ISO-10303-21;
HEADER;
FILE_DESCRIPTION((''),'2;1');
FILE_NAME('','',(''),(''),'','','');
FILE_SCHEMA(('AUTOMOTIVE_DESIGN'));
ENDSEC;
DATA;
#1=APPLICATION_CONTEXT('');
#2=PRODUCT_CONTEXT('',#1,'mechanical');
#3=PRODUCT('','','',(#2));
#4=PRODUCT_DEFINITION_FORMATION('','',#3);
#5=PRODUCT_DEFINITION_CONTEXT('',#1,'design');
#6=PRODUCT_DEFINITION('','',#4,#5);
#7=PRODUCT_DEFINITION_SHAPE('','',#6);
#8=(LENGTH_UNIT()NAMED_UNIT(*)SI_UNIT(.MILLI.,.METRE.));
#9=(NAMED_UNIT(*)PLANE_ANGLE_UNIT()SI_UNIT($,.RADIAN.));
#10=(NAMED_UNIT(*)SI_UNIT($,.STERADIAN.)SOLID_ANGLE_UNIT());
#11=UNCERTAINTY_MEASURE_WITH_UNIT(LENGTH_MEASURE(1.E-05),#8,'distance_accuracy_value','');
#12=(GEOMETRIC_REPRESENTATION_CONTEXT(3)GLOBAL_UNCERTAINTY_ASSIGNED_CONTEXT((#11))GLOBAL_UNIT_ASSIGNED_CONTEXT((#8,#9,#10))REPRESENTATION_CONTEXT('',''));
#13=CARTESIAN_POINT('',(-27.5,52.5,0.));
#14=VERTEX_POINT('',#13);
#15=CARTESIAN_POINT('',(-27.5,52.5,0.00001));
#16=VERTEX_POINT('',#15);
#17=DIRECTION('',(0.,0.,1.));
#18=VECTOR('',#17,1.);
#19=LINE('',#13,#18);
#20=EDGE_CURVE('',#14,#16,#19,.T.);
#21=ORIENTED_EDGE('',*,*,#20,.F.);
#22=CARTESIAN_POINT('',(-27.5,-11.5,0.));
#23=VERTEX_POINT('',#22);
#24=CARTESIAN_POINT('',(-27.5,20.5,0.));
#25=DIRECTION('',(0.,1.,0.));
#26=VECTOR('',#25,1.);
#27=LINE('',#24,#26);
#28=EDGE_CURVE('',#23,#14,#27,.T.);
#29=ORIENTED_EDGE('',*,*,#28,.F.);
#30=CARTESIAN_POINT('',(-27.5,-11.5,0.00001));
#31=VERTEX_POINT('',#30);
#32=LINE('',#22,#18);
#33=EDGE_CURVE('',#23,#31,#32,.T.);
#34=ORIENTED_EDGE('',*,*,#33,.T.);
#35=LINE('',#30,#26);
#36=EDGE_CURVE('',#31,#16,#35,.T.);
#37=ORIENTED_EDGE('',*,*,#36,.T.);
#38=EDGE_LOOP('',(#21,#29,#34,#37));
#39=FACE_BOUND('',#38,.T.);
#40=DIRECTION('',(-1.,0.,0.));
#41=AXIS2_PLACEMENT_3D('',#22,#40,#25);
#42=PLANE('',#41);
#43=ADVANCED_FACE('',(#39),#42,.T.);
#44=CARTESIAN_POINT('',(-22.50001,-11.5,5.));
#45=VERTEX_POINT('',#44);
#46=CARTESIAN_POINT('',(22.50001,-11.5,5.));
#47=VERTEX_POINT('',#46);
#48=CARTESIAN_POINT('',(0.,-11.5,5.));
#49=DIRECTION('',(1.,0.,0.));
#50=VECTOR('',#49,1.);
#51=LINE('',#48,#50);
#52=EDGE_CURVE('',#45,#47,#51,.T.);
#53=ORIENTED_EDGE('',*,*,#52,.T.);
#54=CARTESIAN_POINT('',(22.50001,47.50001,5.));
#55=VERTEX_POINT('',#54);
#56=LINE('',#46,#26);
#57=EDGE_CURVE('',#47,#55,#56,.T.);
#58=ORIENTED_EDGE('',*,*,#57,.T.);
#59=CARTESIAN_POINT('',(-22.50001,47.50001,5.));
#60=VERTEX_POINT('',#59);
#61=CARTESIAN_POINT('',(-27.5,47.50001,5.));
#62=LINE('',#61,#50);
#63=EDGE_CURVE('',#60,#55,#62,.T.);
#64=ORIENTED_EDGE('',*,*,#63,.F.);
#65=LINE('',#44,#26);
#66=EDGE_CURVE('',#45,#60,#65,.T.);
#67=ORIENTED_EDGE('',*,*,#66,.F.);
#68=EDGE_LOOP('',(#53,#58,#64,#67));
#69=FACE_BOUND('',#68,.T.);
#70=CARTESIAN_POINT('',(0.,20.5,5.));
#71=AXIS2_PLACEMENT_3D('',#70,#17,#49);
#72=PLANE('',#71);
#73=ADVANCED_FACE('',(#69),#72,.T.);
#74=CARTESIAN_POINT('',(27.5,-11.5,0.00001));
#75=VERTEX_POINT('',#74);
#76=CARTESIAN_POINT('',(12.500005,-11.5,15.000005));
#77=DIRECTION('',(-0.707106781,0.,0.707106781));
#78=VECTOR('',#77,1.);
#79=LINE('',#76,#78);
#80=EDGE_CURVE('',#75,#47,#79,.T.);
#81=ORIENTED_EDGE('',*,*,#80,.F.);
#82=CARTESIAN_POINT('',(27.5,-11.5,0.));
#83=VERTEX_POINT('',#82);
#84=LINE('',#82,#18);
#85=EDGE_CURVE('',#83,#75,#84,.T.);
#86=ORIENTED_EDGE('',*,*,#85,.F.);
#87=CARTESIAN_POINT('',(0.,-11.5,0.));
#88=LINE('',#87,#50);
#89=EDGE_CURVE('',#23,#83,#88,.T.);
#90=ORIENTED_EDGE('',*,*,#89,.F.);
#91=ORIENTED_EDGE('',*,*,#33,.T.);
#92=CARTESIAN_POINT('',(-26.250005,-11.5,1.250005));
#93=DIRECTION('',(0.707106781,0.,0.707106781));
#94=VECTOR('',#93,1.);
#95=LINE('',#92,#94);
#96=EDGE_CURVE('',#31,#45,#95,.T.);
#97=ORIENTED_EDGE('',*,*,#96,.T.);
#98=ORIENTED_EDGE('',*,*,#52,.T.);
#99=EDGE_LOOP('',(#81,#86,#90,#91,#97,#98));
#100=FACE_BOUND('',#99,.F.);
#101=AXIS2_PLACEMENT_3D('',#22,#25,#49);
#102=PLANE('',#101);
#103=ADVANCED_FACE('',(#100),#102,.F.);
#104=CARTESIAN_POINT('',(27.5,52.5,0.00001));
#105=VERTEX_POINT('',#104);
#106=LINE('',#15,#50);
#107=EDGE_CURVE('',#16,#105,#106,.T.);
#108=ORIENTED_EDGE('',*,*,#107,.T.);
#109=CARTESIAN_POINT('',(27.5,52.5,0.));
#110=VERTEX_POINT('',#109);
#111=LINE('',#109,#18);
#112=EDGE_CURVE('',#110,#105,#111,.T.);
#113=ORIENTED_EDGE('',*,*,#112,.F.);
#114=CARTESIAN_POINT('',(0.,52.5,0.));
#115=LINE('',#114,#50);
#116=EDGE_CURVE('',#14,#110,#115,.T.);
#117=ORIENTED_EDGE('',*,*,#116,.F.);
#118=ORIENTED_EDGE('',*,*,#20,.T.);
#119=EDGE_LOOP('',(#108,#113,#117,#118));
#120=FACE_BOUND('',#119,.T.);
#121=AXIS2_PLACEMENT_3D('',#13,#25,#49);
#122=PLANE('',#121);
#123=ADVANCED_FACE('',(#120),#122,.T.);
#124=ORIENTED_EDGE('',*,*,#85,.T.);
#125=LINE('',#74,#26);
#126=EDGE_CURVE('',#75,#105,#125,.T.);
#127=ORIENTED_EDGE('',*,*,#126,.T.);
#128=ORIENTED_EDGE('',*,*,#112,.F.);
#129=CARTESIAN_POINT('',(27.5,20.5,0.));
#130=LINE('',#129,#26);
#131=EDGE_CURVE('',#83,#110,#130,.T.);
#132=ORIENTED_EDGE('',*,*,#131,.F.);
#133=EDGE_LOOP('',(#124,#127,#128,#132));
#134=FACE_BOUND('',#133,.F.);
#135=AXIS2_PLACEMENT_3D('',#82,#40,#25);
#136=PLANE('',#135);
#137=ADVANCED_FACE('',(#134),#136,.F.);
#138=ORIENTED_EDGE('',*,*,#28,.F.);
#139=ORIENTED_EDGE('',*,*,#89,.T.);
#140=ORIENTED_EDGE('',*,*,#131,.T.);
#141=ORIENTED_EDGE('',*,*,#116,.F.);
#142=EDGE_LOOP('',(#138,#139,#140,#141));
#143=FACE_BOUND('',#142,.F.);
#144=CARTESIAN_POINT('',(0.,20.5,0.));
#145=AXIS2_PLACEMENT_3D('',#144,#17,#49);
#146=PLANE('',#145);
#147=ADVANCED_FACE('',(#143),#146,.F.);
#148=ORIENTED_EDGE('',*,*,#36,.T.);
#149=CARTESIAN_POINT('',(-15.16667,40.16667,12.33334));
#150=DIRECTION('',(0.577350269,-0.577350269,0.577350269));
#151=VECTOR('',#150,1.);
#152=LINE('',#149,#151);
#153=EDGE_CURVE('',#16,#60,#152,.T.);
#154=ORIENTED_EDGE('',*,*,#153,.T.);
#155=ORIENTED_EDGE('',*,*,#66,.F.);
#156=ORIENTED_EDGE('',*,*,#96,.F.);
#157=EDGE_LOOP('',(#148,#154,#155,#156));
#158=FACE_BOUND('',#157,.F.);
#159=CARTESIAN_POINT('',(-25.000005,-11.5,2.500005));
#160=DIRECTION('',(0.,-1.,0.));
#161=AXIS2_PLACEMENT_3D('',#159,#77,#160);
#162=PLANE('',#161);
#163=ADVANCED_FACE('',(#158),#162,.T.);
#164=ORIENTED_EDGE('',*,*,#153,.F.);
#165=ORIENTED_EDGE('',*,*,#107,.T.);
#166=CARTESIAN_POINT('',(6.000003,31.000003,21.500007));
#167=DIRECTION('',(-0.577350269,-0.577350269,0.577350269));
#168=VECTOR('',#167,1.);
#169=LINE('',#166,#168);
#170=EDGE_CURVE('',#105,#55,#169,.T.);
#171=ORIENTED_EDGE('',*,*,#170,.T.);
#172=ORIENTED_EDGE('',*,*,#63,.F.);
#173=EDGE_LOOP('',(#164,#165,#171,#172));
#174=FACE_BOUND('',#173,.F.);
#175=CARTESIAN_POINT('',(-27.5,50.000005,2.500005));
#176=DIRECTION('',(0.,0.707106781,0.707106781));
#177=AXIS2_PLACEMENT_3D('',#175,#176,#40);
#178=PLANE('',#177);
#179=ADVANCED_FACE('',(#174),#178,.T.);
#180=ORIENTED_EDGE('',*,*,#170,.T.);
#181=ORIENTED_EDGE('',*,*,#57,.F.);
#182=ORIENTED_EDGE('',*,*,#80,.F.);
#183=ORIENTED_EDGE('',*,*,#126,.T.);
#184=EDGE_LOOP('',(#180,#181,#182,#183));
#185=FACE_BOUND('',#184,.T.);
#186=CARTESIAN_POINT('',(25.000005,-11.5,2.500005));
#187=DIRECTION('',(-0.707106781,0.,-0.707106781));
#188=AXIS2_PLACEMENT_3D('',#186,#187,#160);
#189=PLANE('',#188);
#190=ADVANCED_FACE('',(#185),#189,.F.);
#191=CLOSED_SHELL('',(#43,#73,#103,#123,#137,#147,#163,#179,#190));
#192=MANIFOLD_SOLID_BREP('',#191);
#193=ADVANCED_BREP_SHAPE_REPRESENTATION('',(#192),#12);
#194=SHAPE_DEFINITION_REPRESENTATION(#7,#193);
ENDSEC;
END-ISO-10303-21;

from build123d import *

# Parameters (mm, degrees)
F0_W     = 55
F0_H     = 64
F1_DEPTH = 5
F2_SIZE  = 4.99999


# Not quite as in the source:
# - a fillet or chamfer is up to 0.001 mm smaller than in the source, because OpenCascade refuses the exact size


with BuildPart() as f1:
    # F0 (on Top) → F1 (new body)
    with BuildSketch(Plane.XY):
        with Locations((0, 20.5)):
            Rectangle(F0_W, F0_H)
    extrude(amount=F1_DEPTH)

    # F2 (size 5 in the source; OpenCascade refuses exactly that, so slightly less here)
    f2_edges = [f1.edges().sort_by_distance(p)[0] for p in [
        (-27.5, 20.5, 5),
        (0, 52.5, 5),
        (27.5, 20.5, 5),
    ]]
    chamfer(f2_edges, length=F2_SIZE)


solid = f1.part
